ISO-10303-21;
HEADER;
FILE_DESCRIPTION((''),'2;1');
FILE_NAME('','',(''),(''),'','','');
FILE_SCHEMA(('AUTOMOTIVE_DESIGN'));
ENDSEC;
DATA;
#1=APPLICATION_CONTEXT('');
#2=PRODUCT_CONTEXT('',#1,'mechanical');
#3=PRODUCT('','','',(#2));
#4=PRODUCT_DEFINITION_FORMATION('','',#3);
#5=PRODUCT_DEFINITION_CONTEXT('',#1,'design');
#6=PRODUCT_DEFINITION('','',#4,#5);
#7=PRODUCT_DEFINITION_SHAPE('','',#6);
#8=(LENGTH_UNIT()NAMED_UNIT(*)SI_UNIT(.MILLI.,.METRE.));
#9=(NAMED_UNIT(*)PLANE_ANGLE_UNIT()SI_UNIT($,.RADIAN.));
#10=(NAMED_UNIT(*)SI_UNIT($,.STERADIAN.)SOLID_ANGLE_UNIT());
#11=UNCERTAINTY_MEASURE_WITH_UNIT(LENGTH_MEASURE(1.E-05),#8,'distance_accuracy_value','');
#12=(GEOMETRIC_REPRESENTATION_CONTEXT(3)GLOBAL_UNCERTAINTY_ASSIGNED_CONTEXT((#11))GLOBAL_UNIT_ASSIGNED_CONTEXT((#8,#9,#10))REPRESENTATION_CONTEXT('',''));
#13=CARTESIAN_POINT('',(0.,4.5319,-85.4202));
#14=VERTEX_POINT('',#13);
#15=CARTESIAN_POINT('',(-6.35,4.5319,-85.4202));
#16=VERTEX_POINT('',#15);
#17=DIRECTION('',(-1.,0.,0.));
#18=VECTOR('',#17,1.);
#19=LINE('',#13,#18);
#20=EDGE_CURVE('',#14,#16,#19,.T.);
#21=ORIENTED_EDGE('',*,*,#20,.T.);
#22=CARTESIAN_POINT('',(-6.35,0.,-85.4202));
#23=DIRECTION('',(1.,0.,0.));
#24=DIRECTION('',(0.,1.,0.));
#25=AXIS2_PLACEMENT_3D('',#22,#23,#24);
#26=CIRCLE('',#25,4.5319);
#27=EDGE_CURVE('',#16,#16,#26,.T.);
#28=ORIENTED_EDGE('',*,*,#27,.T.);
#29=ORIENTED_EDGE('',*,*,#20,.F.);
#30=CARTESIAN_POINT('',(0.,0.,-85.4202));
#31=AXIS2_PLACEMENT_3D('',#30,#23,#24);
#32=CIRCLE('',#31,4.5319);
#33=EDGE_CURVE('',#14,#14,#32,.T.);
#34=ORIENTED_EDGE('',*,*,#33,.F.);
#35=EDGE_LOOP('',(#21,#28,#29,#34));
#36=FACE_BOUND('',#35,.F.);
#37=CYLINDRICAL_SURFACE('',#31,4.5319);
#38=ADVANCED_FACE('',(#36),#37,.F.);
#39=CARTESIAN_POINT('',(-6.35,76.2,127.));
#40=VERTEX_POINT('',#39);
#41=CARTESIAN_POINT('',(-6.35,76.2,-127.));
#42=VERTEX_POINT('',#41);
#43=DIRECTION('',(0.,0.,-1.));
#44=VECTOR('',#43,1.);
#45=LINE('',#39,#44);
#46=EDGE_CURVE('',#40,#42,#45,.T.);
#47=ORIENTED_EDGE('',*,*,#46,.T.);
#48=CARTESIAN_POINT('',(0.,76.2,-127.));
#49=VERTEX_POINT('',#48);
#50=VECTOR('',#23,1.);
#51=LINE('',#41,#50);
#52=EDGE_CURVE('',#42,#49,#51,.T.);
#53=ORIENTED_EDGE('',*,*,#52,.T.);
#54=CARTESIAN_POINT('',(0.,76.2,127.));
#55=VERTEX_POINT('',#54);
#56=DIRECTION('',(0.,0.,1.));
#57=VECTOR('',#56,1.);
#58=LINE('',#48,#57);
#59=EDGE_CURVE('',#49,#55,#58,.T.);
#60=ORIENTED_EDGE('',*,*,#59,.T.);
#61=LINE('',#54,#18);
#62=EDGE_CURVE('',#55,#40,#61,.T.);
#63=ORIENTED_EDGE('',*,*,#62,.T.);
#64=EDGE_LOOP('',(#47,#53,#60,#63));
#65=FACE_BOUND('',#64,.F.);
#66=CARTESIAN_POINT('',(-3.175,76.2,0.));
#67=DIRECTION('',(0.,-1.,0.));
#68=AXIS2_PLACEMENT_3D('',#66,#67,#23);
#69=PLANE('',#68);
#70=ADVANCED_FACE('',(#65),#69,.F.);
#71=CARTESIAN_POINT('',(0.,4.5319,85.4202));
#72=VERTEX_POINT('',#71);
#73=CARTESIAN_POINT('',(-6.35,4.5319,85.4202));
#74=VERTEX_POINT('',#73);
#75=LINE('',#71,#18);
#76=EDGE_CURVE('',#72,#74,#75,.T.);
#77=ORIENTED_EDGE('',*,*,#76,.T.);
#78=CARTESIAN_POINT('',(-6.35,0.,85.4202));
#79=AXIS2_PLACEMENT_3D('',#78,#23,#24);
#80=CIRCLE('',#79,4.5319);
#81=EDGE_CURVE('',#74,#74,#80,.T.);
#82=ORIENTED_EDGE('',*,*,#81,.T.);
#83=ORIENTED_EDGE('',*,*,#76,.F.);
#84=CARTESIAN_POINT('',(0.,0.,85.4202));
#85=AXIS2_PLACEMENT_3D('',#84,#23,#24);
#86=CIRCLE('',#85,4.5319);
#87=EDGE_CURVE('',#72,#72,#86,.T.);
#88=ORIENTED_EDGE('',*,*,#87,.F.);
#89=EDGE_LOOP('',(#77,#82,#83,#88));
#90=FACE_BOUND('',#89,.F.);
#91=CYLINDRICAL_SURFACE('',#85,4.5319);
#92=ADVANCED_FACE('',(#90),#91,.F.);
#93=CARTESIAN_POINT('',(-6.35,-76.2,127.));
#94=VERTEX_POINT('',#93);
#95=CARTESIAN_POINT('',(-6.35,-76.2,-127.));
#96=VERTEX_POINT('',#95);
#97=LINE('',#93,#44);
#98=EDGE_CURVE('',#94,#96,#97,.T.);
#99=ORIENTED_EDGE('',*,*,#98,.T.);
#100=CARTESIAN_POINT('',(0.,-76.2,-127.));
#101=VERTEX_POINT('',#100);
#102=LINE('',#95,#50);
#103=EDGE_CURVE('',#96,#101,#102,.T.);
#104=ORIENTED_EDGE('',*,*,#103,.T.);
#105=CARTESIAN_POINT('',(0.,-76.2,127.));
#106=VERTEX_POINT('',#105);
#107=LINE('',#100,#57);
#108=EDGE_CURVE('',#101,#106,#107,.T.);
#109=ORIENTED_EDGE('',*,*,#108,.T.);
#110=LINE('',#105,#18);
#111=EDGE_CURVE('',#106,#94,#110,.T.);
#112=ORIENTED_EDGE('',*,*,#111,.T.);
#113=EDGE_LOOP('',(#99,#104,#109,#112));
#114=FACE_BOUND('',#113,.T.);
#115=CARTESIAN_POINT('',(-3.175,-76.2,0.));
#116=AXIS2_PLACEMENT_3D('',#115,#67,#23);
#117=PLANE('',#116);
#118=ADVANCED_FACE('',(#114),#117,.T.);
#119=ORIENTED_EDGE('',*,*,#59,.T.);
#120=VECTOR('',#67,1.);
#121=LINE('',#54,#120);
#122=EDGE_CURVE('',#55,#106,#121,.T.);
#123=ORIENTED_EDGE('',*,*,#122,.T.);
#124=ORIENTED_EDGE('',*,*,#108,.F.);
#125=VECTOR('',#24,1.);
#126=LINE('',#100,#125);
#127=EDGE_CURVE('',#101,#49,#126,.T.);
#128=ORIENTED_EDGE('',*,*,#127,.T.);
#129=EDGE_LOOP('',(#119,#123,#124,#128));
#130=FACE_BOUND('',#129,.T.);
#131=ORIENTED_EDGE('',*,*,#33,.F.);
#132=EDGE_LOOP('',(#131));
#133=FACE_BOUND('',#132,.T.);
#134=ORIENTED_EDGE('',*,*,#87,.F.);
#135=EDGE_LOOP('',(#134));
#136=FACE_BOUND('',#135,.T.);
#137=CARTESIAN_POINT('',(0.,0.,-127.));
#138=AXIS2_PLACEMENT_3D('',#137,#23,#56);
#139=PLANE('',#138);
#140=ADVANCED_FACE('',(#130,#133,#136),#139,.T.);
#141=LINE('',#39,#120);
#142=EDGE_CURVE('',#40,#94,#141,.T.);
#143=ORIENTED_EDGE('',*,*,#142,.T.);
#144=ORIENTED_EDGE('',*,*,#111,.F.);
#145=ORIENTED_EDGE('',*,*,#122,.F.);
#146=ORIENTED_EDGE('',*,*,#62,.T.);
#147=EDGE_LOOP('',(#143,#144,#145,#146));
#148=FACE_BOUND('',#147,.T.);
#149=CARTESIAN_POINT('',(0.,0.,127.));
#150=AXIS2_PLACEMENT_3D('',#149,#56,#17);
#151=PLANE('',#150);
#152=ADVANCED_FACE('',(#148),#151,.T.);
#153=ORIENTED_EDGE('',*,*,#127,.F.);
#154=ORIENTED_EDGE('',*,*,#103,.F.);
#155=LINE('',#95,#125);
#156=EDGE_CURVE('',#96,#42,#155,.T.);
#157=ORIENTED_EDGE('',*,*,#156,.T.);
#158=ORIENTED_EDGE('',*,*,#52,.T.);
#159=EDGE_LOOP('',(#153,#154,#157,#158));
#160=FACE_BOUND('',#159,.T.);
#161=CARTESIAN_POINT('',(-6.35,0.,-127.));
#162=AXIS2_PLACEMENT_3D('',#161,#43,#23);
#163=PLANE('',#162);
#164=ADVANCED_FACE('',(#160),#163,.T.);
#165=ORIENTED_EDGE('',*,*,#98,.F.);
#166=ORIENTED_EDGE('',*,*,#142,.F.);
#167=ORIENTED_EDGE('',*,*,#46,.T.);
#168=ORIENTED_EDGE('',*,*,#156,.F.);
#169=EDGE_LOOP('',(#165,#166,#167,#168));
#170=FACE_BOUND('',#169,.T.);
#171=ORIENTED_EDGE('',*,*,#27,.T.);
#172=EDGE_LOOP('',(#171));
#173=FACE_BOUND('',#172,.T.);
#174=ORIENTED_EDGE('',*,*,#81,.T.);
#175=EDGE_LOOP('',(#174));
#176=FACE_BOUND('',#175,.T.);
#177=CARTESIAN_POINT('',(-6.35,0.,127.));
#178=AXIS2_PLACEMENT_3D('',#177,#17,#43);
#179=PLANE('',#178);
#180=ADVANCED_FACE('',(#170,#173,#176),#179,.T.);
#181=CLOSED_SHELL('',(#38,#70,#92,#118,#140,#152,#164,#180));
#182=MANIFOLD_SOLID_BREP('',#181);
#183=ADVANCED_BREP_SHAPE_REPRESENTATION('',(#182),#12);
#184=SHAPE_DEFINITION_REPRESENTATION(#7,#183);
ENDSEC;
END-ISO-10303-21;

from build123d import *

# Parameters (mm, degrees)
F1_DEPTH = 76.2
F2_R     = 4.5318999151
F3_DEPTH = 6.351


# Not quite as in the source:
# - a feature names something its author has since deleted; it is built from what else it names


with BuildPart() as f1:
    # F0 (on Front) → F1 (new body, symmetric)
    with BuildSketch(Plane.XZ):
        Polygon((0, -127), (0, 0), (0, 127), (-6.35, 127), (-6.35, 0), (-6.35, -127), align=None)
    extrude(amount=F1_DEPTH, both=True)

    # F2 (on face) → F3 (cut, through all)
    with BuildSketch(Plane.YZ):
        with Locations((0, -85.4202)):
            Circle(F2_R)
        with Locations((0, 85.4202)):
            Circle(F2_R)
    extrude(amount=-F3_DEPTH, mode=Mode.SUBTRACT)


solid = f1.part
